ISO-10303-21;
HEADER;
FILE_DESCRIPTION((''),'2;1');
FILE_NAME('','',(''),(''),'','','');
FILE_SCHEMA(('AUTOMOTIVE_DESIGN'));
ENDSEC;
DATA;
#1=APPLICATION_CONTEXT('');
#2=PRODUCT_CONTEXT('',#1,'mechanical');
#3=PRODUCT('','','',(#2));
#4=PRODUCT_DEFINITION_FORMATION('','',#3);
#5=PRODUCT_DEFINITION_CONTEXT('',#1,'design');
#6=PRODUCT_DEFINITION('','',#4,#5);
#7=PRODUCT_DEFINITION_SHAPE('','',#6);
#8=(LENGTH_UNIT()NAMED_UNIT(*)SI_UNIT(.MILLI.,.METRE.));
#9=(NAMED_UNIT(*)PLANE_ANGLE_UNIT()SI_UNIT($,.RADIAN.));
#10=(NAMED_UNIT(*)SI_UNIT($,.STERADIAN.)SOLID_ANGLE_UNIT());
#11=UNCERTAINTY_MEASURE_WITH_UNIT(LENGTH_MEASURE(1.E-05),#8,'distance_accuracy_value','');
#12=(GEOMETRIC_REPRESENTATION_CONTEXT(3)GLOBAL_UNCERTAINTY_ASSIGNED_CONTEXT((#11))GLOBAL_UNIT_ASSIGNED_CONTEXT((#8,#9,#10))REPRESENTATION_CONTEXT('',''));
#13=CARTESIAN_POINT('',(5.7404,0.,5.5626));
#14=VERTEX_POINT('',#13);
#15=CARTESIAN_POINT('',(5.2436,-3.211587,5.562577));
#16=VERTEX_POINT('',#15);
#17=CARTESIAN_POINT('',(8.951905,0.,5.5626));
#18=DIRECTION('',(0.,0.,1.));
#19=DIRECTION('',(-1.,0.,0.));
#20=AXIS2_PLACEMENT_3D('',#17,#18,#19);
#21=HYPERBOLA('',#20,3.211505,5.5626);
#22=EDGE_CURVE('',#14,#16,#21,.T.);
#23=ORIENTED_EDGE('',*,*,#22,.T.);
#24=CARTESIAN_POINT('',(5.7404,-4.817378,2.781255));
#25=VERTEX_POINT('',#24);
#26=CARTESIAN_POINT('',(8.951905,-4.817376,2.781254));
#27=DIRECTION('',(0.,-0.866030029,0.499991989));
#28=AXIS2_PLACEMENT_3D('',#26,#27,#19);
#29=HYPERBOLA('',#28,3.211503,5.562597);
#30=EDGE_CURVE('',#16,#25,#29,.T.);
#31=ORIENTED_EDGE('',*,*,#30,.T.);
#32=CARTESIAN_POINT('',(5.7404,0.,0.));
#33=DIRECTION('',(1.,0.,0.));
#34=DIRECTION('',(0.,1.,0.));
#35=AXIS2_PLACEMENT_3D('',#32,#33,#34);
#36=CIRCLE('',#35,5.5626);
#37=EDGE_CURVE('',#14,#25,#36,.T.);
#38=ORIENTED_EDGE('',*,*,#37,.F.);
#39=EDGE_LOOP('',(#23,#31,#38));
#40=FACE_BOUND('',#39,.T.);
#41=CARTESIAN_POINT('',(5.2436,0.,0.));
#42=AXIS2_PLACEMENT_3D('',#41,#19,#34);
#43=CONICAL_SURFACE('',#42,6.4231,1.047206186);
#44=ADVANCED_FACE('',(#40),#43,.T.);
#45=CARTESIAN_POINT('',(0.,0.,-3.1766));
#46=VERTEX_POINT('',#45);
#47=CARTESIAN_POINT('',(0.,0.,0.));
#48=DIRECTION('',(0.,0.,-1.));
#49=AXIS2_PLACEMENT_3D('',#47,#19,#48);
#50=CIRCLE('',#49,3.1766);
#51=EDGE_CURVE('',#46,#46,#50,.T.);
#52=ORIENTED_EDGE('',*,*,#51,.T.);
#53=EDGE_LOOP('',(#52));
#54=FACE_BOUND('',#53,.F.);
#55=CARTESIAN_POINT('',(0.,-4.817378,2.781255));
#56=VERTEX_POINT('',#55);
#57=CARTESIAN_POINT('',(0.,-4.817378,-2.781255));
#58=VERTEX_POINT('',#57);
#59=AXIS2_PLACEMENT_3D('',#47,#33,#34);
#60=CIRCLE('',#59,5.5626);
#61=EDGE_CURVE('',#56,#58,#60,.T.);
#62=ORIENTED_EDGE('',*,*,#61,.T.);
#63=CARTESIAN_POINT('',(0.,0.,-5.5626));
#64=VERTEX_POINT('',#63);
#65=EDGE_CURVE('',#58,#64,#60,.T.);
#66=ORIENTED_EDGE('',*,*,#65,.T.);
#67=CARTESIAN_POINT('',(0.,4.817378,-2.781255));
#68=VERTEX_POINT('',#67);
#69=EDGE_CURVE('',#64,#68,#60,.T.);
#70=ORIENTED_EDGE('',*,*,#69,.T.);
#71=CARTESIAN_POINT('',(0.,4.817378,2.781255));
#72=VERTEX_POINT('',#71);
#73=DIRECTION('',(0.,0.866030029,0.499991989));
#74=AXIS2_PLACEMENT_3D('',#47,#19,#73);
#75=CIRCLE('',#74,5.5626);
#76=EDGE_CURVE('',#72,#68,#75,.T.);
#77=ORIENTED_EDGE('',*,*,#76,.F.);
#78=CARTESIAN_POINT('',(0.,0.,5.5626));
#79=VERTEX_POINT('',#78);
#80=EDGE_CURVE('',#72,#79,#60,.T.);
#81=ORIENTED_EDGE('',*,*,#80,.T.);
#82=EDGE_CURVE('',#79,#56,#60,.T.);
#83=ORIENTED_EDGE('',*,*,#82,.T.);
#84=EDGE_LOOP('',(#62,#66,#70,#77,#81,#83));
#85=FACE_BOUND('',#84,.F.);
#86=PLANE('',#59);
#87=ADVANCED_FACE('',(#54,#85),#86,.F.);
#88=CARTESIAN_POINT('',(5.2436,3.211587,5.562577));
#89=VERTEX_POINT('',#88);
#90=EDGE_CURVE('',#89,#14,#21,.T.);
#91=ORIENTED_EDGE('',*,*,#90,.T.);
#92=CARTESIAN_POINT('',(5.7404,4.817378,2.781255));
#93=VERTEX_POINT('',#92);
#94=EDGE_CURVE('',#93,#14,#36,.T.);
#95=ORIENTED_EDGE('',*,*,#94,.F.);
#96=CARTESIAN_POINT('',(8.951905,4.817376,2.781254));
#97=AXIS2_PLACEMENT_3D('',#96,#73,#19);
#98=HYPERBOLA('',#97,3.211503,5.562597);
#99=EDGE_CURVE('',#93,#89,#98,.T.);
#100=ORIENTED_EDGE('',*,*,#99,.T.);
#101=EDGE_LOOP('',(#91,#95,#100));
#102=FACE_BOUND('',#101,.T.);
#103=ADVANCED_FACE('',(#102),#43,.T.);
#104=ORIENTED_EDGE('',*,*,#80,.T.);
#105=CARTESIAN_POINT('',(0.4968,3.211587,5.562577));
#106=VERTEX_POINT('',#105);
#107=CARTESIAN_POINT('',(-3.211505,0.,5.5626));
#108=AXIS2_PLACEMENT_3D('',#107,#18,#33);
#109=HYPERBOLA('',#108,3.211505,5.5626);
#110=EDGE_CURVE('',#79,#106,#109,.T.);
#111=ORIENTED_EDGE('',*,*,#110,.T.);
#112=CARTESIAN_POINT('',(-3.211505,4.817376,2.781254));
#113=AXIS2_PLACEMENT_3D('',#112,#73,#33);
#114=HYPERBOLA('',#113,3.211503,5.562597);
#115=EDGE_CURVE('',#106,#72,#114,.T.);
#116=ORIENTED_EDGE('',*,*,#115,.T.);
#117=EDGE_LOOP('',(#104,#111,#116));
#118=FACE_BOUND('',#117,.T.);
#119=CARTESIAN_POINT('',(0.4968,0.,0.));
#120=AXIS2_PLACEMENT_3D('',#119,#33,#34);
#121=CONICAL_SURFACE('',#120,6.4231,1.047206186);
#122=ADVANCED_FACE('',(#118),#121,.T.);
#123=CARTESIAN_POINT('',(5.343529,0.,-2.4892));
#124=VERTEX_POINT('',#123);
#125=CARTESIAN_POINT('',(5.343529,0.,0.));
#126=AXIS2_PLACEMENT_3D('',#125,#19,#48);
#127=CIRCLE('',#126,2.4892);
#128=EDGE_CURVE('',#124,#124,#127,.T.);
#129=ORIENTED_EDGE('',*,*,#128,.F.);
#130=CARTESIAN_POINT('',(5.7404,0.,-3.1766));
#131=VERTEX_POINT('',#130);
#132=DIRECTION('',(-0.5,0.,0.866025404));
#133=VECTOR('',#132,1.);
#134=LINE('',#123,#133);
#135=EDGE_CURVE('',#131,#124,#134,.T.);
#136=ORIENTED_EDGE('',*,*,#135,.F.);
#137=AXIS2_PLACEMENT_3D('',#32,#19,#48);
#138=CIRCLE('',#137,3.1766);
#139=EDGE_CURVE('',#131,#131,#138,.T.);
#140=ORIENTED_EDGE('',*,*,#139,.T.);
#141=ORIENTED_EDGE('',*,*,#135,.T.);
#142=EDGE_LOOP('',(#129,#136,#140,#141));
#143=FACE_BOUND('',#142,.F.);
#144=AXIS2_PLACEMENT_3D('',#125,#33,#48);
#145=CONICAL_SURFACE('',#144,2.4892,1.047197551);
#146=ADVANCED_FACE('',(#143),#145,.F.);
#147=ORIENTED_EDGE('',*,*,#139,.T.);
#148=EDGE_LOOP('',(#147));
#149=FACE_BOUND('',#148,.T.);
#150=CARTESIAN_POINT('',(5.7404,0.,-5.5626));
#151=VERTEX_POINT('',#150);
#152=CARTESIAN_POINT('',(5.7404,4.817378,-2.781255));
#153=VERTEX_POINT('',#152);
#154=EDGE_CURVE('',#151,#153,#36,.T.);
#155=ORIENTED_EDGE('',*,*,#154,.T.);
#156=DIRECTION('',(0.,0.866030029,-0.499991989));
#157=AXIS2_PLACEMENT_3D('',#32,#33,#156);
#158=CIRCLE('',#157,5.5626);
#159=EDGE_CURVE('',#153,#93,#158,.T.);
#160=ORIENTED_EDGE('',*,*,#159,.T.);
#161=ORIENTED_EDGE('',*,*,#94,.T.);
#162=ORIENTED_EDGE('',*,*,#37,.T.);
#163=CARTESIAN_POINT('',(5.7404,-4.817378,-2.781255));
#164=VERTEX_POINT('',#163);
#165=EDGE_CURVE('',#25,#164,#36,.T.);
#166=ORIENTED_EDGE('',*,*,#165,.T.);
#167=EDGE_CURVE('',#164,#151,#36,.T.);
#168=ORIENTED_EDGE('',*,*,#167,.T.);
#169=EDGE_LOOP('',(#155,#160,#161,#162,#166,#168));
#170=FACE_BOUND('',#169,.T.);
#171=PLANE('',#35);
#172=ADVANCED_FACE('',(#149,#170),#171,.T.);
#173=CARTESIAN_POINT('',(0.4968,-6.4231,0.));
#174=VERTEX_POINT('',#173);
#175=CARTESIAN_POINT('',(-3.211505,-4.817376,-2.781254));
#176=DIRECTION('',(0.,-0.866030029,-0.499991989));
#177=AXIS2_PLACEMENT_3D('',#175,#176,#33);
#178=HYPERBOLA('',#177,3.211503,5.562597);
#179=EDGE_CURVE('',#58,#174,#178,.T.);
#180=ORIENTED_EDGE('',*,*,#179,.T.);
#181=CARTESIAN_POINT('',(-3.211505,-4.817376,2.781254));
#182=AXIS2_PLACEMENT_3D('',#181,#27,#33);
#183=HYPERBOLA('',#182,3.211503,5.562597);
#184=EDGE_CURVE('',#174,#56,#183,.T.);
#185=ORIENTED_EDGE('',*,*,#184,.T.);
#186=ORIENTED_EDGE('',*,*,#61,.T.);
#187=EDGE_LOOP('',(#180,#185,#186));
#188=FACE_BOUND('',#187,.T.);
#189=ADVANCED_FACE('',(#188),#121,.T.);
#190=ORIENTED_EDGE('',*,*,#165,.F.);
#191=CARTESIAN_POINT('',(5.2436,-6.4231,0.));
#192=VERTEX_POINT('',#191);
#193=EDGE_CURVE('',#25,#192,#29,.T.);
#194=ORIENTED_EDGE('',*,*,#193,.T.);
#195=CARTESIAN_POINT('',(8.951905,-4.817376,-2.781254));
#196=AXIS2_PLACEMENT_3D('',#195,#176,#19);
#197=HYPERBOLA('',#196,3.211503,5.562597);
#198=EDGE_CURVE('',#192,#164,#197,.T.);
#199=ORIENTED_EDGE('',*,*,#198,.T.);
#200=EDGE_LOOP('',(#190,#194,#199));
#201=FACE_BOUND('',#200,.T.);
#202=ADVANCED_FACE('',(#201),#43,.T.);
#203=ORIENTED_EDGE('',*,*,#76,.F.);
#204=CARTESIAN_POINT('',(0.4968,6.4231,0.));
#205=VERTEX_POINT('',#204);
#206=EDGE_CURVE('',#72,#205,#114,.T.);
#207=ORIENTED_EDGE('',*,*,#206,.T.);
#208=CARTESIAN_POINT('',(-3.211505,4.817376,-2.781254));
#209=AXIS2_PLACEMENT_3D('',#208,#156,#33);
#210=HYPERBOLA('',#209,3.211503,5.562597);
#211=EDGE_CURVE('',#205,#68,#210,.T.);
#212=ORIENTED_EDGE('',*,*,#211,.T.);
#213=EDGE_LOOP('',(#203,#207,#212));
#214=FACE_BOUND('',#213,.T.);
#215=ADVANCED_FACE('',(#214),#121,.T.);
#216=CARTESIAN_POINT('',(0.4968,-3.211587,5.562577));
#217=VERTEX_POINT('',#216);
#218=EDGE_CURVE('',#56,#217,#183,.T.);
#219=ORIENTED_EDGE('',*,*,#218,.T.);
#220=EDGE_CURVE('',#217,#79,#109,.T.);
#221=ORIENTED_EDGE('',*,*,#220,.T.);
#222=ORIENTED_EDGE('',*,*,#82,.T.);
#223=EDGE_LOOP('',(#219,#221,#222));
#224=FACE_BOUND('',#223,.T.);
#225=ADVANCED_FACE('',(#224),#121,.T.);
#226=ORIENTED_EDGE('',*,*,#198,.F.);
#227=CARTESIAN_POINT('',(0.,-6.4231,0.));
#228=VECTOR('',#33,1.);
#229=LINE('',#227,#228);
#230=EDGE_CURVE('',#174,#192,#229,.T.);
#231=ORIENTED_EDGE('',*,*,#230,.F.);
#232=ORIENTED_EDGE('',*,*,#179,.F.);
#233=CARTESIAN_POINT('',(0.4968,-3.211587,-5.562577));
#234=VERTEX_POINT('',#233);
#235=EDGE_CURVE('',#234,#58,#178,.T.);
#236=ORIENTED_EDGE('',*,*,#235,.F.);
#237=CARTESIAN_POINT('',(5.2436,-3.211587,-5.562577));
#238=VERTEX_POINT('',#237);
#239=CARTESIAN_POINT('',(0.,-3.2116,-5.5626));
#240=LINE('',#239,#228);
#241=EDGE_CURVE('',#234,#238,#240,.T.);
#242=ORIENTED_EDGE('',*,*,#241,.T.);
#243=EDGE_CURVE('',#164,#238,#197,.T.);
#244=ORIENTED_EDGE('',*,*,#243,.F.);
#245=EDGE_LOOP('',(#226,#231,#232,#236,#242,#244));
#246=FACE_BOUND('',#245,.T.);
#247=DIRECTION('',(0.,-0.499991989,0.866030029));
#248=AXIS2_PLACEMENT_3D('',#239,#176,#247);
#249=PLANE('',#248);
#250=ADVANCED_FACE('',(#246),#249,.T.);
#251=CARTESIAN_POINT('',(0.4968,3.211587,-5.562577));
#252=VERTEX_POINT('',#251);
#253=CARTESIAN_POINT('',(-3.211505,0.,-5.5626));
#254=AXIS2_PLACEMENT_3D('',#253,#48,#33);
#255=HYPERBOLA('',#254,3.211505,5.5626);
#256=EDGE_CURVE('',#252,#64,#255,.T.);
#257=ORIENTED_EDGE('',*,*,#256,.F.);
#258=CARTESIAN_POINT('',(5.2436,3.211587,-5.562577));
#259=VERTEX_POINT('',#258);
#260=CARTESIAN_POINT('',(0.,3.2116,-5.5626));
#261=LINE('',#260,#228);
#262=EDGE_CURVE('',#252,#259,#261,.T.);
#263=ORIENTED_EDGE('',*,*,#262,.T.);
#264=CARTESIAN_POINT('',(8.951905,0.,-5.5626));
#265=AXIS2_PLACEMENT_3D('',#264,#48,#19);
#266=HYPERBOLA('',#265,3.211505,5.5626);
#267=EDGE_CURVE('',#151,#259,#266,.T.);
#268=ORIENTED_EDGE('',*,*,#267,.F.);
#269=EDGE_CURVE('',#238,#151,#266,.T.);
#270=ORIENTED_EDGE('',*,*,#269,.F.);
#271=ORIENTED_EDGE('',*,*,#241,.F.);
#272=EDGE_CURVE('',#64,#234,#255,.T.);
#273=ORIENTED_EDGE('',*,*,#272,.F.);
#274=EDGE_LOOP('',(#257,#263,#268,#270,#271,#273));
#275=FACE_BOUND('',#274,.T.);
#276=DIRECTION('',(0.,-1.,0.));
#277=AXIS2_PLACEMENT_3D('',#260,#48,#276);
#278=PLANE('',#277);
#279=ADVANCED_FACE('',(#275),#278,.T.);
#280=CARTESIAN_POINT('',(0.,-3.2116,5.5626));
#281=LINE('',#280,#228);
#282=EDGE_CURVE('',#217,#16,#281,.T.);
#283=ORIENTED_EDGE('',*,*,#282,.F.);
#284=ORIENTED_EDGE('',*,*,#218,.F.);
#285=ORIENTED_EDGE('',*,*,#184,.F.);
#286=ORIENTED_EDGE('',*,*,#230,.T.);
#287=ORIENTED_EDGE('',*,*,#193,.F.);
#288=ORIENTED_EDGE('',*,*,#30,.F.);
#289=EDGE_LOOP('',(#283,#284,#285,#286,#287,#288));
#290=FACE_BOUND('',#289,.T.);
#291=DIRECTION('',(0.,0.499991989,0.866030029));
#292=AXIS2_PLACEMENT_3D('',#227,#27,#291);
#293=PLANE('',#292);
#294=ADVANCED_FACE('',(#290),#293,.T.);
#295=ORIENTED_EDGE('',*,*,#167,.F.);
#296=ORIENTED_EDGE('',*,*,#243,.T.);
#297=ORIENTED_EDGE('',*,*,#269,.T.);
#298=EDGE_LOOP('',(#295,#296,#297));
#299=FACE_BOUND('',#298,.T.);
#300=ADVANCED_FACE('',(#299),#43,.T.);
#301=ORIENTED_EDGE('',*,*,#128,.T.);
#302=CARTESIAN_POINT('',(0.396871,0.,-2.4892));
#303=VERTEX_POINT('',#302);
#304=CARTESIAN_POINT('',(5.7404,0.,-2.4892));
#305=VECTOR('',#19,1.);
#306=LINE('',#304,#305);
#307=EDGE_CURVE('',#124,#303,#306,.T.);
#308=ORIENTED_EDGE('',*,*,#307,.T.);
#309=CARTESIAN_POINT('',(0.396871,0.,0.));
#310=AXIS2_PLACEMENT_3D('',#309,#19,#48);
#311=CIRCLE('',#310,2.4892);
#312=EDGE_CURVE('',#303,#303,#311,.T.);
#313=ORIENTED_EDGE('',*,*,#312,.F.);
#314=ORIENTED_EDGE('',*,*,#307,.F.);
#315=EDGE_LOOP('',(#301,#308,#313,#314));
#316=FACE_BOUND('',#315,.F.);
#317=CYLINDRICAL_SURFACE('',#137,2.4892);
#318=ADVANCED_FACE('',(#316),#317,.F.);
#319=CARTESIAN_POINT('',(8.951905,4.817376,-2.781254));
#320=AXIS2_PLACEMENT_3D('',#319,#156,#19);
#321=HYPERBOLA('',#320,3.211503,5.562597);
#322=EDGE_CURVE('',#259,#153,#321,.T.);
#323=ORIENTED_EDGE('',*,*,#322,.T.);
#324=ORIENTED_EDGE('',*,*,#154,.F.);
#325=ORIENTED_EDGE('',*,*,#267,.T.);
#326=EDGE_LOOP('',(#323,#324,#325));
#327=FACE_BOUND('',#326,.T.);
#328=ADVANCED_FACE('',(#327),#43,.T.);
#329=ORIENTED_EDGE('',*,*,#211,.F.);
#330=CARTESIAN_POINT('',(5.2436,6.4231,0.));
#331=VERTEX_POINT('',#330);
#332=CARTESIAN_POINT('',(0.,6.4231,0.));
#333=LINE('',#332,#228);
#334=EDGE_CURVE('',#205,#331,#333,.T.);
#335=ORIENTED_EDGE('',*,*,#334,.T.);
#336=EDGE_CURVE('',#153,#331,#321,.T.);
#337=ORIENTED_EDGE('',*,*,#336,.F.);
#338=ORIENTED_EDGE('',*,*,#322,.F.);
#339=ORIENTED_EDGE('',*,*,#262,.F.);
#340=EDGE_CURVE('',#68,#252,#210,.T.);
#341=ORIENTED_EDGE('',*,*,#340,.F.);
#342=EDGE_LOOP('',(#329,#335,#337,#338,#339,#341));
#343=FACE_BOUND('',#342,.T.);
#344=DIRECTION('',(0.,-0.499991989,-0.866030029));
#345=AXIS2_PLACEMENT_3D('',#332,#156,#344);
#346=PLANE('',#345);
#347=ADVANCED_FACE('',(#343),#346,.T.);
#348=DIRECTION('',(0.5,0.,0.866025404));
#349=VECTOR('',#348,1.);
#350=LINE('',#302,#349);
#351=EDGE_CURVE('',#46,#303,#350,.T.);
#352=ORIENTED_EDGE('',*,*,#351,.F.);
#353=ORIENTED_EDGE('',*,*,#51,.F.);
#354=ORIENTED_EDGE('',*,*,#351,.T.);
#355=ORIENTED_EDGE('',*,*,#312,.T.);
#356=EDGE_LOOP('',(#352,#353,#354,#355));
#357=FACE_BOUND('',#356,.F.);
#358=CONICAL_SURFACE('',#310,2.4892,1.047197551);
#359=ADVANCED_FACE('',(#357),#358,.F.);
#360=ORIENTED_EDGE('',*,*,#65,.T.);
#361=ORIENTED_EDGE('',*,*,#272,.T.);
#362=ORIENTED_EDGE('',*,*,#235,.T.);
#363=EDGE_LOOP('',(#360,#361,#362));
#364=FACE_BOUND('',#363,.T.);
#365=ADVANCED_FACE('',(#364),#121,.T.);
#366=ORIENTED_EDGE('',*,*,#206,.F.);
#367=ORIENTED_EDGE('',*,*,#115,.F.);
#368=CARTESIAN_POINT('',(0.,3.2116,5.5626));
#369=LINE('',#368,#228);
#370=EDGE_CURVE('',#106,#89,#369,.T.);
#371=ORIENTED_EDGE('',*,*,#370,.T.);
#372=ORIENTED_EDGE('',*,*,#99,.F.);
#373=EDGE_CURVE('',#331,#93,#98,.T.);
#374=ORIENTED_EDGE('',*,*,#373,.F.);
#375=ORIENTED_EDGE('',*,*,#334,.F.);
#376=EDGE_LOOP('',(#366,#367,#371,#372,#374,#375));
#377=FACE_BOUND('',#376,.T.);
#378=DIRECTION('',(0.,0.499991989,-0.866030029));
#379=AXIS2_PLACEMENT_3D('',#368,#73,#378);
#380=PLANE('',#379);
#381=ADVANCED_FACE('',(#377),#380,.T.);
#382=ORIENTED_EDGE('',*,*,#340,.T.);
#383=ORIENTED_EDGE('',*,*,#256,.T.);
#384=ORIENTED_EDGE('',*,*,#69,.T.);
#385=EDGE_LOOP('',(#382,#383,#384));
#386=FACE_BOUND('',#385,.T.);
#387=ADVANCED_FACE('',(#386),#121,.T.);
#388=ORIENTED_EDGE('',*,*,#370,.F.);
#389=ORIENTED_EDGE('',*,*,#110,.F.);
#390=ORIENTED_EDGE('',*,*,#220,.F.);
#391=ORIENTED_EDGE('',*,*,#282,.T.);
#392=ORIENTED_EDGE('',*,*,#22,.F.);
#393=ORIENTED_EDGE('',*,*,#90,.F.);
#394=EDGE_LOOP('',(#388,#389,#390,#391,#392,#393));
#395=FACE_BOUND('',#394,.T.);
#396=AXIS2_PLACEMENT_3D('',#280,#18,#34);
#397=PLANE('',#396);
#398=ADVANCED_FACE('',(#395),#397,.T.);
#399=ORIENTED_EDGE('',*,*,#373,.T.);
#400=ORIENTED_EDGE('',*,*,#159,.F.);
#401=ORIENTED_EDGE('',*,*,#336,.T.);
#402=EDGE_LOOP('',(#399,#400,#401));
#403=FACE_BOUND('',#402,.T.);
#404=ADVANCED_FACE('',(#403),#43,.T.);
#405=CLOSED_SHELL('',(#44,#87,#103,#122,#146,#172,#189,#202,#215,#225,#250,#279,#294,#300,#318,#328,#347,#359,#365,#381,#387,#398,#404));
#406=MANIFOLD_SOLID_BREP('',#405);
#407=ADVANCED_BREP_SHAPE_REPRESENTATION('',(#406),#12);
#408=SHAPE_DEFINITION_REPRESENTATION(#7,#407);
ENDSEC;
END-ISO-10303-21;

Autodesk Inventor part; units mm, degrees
ref_plane "YZ Plane" through (0, 0, 0) normal (1, 0, 0) x (0, 1, 0)
ref_plane "XZ Plane" through (0, 0, 0) normal (0, 1, 0) x (-1, 0, 0)
sketch "Sketch1" plane through (0, 0, 0) normal (1, 0, 0) x (0, 1, 0)
  line L0 (-6.4231, 0) -> (-3.2116, 5.5626)
  line L1 (-3.2116, 5.5626) -> (3.2116, 5.5626)
  line L2 (3.2116, 5.5626) -> (6.4231, 0)
  line L3 (6.4231, 0) -> (3.2116, -5.5626)
  line L4 (3.2116, -5.5626) -> (-3.2116, -5.5626)
  line L5 (-3.2116, -5.5626) -> (-6.4231, 0)
  point P0 (0, 0)
  point P1 (0, 0)
  dimension "d0" = 12.8463
extrude "Body" add sketch "Sketch1" along normal blind 5.7404
sketch "Sketch2" plane through (0, 0, 0) normal (0, 0, 1) x (1, 0, 0)
  line L0 (0, 3.2116) -> (0, 6.4231) projected
  line L1 (0, 6.4231) -> (5.7404, 6.4231) projected
  line L2 (5.7404, 3.2116) -> (5.7404, 6.4231) projected
  line L3 (-1.1481, 0) -> (6.8885, 0) projected
  line L4 (0.4968, 6.4231) -> (0, 5.5626)
  line L5 (5.2436, 6.4231) -> (5.7404, 5.5626)
  dimension "d3" = 30
  dimension "d4" = 30
  dimension "d5" = 11.1252
  dimension "d6" = 11.1252
revolve "Chamfer1" cut sketch "Sketch2" angle 360 about axis through (-10, 0, 0) along (1, 0, 0)
sketch "Sketch3" plane through (5.7404, 0, 0) normal (1, 0, 0) x (0, 0, -1)
  arc A0 (-2.7813, -4.8174) -> (2.7813, -4.8174) centre (0, 0) ccw projected
hole "Thread" at (5.7404, 0, 0) direction (-1, 0, 0) diameter 4.9784 end through all thread size "1/4-20 UNC" class "2B" standard "ANSI Unified Screw Threads"
chamfer "Chamfer2" distance 0.6874 angle 30 1 edges at (5.7404, 0, 2.4892) measured on face at (5.7404, 4.5118, -0.1)
chamfer "Chamfer3" distance 0.6874 angle 30 1 edges at (0, 0, 2.4892) measured on face at (0, 4.5118, 0.1)
ref_plane "Work Plane1" through (-12.197, 0, 0) normal (0, -0.8660254, -0.5) x (1, 0, 0)
equation "\"d0\" = 1.1547 * SW"
equation "\"d1\" = KOH"
equation "\"d3\" = ANG1"
equation "\"d4\" = ANG2"
equation "\"d5\" = SW0"
equation "\"d6\" = SW01"
equation "\"d8\" = -0.5 * GD1 + 0.5 * NND"
equation "\"d40\" = -0.5 * GD1 + 0.5 * NND"
equation "\"d10\" = -0.5 * GD1 + 0.5 * NND"
equation "\"d41\" = -0.5 * GD1 + 0.5 * NND"
equation "\"ANG1\" = 30deg"
equation "\"ANG2\" = 30deg"
equation "\"NND\" = 6.35"
equation "\"KOH\" = 5.7404"
equation "\"SW\" = 11.1252"
equation "\"SW0\" = SW"
equation "\"SW01\" = SW"
equation "\"THREADDIA\" = 6.35"
equation "\"TOA\" = 30deg"
equation "\"E0\" = 1.155 * SW"
equation "\"GD1\" = 4.975185"
properties part number "AS 2465 - 1/4  UNC" material "Steel, Mild"
